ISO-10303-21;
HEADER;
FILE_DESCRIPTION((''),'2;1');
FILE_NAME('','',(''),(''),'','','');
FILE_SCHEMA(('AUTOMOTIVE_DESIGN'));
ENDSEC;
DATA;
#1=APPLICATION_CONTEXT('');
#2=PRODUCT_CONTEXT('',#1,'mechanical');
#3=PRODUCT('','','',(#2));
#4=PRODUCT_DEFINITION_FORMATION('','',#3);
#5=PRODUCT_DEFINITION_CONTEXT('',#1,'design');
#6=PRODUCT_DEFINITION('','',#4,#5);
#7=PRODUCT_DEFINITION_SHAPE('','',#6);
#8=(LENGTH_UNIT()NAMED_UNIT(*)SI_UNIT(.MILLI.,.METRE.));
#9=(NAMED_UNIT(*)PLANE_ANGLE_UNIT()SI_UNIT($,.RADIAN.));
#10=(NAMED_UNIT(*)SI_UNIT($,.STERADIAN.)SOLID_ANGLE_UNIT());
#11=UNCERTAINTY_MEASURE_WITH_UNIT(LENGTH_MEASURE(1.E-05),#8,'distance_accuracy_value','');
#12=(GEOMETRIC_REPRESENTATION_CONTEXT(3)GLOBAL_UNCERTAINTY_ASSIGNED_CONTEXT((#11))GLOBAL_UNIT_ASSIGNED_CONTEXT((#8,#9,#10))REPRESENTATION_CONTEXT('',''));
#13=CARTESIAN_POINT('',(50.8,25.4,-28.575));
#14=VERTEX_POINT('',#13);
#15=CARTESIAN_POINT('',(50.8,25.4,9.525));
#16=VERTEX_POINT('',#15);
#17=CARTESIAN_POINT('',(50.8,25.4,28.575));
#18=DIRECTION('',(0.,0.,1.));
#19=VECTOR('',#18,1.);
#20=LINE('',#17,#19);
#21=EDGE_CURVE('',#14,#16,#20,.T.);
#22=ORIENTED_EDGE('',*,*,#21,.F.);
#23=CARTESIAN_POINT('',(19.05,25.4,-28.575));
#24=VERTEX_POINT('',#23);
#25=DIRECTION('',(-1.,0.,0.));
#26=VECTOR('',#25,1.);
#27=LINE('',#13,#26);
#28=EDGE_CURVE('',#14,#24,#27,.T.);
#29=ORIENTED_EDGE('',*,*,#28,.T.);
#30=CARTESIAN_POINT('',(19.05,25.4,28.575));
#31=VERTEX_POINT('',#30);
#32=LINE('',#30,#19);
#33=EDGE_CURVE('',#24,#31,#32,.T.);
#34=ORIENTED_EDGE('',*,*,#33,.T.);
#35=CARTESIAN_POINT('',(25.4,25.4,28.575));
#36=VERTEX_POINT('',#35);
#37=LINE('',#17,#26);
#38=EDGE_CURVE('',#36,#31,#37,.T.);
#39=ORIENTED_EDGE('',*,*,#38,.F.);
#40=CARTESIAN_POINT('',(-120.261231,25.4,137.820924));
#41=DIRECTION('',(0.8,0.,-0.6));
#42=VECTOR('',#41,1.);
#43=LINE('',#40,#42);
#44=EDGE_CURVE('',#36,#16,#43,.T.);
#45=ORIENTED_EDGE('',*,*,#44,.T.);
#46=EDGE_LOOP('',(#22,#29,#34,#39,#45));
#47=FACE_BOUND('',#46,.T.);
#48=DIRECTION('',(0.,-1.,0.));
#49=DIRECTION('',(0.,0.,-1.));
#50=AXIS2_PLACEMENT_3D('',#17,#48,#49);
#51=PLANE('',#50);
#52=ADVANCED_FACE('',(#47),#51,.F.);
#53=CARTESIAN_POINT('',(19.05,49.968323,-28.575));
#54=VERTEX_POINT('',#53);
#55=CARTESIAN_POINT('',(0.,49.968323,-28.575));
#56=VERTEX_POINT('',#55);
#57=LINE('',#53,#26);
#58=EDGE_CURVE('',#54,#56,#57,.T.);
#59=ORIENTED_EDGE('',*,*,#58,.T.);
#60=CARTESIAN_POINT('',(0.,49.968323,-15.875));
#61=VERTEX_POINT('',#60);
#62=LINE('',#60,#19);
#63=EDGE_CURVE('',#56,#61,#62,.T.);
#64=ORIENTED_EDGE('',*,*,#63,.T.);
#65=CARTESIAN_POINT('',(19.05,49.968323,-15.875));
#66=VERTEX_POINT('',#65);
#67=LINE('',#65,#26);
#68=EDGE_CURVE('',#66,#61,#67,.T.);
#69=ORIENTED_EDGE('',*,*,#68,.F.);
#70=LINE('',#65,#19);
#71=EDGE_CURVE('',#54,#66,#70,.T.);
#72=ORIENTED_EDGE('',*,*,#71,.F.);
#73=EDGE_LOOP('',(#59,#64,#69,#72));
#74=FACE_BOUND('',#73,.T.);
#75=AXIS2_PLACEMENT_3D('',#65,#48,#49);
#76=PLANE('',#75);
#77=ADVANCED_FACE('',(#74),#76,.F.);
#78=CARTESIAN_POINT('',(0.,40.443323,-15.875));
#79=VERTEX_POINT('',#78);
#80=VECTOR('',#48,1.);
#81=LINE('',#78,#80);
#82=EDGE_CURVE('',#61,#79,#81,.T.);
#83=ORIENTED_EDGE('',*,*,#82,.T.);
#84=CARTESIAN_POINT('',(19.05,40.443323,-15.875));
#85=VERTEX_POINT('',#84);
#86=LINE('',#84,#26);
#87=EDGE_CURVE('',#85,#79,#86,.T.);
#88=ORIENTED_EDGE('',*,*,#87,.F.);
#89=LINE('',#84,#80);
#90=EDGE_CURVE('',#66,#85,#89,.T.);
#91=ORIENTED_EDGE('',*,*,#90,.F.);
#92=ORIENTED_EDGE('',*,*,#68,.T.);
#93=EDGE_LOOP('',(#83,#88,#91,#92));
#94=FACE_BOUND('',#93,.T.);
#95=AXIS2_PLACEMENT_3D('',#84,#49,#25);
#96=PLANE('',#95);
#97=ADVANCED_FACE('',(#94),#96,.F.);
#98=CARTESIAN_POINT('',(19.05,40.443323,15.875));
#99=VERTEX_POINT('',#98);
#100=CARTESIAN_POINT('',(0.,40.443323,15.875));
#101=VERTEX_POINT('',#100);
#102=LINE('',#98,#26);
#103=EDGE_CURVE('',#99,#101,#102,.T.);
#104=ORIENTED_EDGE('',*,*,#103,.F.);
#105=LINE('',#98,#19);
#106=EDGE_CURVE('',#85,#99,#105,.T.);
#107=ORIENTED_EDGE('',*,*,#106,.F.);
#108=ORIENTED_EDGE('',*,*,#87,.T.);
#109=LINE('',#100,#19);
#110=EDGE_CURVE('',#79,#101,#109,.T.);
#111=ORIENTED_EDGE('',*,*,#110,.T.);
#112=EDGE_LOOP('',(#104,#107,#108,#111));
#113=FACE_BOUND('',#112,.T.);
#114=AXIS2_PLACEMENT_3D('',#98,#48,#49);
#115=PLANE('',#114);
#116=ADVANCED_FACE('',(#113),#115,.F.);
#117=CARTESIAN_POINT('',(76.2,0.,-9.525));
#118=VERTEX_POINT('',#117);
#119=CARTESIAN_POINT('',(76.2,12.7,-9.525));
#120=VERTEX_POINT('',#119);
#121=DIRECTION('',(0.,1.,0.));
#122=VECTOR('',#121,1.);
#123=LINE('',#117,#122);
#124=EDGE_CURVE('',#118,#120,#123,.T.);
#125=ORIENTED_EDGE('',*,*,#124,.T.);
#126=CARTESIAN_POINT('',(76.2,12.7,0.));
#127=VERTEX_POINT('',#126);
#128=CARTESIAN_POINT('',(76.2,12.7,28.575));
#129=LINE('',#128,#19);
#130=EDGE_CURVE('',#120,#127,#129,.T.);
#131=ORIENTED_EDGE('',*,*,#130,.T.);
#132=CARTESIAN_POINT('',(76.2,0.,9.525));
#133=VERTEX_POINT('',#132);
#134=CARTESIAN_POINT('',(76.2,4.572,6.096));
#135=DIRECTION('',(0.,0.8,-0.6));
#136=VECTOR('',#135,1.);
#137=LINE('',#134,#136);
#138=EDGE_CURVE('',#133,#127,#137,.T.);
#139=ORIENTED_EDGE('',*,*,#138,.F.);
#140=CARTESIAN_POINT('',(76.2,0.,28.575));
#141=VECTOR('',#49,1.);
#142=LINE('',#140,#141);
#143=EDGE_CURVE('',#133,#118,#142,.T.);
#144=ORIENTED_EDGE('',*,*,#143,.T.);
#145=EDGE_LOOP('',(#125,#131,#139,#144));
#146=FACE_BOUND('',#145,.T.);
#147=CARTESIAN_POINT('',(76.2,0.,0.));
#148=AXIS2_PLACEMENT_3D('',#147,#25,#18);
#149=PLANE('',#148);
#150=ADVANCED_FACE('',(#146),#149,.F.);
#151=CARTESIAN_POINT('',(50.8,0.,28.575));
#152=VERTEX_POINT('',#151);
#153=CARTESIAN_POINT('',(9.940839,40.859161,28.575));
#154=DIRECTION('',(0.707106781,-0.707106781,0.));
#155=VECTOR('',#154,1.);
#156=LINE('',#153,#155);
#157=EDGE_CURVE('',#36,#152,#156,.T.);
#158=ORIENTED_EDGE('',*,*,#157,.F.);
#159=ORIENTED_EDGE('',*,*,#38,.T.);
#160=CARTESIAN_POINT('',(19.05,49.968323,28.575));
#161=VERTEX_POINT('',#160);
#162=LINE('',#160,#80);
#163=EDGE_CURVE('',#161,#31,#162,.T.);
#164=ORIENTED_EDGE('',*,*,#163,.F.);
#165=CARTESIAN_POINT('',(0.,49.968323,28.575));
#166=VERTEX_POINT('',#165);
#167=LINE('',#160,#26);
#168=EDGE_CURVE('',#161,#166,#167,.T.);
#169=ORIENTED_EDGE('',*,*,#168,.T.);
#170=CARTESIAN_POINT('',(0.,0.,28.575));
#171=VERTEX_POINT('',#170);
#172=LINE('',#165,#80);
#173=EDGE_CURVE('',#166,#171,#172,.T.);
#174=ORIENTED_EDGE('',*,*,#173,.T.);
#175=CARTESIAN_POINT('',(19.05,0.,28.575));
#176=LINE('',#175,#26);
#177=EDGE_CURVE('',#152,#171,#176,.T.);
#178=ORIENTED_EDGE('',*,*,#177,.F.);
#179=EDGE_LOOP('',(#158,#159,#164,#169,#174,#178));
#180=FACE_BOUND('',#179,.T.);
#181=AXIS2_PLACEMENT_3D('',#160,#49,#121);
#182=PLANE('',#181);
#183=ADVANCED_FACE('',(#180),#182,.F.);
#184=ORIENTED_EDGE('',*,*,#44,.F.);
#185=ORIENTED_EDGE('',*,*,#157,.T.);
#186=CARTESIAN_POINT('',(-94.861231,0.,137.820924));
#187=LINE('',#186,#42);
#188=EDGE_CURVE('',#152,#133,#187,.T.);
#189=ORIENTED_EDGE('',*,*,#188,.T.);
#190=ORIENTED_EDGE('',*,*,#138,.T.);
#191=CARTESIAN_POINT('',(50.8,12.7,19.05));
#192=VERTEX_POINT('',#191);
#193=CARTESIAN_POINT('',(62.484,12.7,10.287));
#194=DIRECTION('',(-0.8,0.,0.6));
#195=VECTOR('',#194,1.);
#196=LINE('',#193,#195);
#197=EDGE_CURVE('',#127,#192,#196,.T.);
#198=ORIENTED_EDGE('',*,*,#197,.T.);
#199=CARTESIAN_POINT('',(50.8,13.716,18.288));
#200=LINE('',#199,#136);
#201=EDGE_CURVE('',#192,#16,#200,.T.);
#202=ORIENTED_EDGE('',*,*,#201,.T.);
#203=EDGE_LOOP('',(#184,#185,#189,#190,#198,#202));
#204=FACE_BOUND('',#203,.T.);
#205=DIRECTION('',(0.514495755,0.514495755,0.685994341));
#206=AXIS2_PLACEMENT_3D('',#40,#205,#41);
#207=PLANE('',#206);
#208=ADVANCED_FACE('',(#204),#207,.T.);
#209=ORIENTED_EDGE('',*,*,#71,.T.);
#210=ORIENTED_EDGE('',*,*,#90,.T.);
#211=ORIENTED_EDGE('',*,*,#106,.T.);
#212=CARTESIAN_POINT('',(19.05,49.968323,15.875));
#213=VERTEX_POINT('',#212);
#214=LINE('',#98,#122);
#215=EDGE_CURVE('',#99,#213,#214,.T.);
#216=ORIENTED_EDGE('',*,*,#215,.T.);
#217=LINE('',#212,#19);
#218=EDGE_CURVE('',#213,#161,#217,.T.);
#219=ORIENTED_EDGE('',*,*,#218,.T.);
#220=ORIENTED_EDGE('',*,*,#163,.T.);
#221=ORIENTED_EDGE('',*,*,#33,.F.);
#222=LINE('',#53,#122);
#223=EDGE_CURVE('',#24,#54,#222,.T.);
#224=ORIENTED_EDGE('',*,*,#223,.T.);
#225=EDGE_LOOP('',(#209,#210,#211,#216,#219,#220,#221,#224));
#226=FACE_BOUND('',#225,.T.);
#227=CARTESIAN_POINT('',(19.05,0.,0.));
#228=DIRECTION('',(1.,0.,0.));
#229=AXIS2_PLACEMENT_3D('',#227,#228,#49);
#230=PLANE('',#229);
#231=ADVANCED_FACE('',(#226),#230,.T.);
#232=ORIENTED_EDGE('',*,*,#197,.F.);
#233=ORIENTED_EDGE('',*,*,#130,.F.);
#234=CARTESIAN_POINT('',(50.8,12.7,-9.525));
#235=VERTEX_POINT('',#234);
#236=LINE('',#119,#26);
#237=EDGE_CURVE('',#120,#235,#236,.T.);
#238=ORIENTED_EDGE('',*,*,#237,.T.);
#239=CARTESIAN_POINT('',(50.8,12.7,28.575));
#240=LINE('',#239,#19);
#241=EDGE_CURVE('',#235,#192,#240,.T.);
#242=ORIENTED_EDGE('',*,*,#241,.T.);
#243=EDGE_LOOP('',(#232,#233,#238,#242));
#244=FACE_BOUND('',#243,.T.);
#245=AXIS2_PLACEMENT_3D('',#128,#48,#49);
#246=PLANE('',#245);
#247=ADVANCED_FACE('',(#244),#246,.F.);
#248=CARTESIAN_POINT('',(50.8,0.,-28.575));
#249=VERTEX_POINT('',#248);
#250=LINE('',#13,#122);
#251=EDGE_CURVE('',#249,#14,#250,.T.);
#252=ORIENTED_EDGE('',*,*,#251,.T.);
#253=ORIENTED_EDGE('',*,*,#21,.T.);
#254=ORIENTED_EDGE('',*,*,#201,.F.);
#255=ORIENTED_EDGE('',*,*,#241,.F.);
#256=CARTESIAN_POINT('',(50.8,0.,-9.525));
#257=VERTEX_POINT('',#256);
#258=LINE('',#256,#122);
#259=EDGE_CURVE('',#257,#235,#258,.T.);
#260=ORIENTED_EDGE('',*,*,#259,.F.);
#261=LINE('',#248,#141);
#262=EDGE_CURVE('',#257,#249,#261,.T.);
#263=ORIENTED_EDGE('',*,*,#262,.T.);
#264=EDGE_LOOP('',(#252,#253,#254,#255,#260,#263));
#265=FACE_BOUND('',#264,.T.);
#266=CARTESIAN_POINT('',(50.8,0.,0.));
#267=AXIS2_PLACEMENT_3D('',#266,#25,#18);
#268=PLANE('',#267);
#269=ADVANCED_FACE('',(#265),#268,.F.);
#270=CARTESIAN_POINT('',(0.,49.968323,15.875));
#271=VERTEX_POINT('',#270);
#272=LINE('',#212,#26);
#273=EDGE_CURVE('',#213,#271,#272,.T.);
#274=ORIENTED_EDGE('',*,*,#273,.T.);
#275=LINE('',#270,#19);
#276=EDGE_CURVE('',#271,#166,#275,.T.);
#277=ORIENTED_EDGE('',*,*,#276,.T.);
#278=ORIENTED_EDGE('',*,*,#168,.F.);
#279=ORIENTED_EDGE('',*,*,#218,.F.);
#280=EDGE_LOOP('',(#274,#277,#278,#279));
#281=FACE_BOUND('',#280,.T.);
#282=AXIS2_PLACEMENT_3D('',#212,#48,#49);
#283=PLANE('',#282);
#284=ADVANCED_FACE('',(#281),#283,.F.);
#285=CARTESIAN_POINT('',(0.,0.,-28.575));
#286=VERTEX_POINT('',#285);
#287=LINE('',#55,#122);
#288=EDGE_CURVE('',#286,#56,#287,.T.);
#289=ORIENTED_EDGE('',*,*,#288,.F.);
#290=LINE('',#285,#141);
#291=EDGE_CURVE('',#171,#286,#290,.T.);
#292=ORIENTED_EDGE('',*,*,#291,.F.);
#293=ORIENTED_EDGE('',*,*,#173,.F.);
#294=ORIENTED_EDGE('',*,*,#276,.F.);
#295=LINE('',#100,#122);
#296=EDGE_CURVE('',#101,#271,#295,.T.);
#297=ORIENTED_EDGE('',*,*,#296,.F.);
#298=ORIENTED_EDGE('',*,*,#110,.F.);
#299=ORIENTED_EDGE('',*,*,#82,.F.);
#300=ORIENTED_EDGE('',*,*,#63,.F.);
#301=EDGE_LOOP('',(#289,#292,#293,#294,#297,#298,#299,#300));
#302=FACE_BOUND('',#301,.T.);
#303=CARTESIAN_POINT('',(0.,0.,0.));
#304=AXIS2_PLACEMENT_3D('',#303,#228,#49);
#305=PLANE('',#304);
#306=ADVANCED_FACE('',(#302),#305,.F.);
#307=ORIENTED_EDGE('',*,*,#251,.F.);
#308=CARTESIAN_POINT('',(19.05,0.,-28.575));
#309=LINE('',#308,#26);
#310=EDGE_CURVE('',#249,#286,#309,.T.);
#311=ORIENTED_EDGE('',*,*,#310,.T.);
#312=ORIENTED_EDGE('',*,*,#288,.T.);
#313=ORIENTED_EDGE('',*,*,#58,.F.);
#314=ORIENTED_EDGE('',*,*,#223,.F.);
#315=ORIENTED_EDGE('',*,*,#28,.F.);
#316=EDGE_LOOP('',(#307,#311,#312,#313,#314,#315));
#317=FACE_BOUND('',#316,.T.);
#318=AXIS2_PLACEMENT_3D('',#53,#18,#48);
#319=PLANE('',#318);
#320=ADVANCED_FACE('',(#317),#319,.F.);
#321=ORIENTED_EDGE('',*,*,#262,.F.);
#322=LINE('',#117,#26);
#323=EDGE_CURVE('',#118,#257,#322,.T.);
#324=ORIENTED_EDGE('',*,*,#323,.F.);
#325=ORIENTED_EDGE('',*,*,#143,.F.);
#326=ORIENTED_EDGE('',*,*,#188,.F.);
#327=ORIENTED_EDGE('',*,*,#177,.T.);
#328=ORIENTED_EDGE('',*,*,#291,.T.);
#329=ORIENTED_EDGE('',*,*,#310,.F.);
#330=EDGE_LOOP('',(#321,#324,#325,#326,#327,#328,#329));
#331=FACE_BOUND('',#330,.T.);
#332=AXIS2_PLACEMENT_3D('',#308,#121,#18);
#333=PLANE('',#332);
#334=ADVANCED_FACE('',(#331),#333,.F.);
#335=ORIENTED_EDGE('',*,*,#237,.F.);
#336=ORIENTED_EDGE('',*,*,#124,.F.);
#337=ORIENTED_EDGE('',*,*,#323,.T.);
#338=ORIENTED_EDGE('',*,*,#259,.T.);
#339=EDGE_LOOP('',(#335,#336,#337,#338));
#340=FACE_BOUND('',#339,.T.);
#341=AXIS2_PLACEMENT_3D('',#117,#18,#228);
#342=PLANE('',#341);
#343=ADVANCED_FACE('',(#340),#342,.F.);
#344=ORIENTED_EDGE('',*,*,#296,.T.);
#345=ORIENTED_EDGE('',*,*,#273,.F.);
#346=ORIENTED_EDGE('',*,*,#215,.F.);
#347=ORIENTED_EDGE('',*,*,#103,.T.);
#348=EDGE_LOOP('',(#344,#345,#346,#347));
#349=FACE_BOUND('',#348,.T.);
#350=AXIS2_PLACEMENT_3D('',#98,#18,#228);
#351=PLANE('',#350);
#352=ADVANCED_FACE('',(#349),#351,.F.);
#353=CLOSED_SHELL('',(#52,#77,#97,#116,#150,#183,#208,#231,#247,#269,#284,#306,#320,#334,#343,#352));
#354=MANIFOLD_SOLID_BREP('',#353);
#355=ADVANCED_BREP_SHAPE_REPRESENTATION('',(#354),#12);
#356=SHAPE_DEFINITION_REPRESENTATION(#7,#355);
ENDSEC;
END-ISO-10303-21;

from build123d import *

# Parameters (mm, degrees)
BOSS_EXTRUDE1_DEPTH = 19.05
SKETCH2_W           = 57.15
SKETCH2_H           = 25.4
BOSS_EXTRUDE2_DEPTH = 31.75
SKETCH6_W           = 38.1
SKETCH6_H           = 12.7
BOSS_EXTRUDE3_DEPTH = 25.4
CUT_EXTRUDE1_START  = -18
CUT_EXTRUDE1_DEPTH  = 33.875


with BuildPart() as part:
    # Sketch1 → Boss-Extrude1 (new body)
    with BuildSketch(Plane(origin=(0, 0, 0), x_dir=(0, 0, -1), z_dir=(1, 0, 0))):
        Polygon((-15.875, 40.443322581), (15.875, 40.443322581), (15.875, 49.968322581), (28.575, 49.968322581), (28.575, 0), (-28.575, 0), (-28.575, 49.968322581), (-15.875, 49.968322581), align=None)
    extrude(amount=BOSS_EXTRUDE1_DEPTH)

    # Sketch2 → Boss-Extrude2 (add)
    with BuildSketch(Plane(origin=(19.05, 0, 0), x_dir=(0, 0, -1), z_dir=(1, 0, 0))):
        with Locations((0, 12.7)):
            Rectangle(SKETCH2_W, SKETCH2_H)
    extrude(amount=BOSS_EXTRUDE2_DEPTH)

    # Sketch6 → Boss-Extrude3 (add)
    with BuildSketch(Plane(origin=(50.8, 0, 0), x_dir=(0, 0, -1), z_dir=(1, 0, 0))):
        with Locations((-9.525, 6.35)):
            Rectangle(SKETCH6_W, SKETCH6_H)
    extrude(amount=BOSS_EXTRUDE3_DEPTH)

    # Cut-Extrude1: read off the stored shape, not the designer's step
    # Cut-Extrude1 outline → Cut-Extrude1 (cut)
    with BuildSketch(Plane(origin=(0, 0, 0), x_dir=(1, 0, 0), z_dir=(0, 0.7999999999999996, -0.6000000000000005)).offset(CUT_EXTRUDE1_START)):
        Polygon((24, -38.94), (24, -40), (76.2, -40), (76.2, -7.62), align=None)
    extrude(amount=CUT_EXTRUDE1_DEPTH, mode=Mode.SUBTRACT)


solid = part.part
